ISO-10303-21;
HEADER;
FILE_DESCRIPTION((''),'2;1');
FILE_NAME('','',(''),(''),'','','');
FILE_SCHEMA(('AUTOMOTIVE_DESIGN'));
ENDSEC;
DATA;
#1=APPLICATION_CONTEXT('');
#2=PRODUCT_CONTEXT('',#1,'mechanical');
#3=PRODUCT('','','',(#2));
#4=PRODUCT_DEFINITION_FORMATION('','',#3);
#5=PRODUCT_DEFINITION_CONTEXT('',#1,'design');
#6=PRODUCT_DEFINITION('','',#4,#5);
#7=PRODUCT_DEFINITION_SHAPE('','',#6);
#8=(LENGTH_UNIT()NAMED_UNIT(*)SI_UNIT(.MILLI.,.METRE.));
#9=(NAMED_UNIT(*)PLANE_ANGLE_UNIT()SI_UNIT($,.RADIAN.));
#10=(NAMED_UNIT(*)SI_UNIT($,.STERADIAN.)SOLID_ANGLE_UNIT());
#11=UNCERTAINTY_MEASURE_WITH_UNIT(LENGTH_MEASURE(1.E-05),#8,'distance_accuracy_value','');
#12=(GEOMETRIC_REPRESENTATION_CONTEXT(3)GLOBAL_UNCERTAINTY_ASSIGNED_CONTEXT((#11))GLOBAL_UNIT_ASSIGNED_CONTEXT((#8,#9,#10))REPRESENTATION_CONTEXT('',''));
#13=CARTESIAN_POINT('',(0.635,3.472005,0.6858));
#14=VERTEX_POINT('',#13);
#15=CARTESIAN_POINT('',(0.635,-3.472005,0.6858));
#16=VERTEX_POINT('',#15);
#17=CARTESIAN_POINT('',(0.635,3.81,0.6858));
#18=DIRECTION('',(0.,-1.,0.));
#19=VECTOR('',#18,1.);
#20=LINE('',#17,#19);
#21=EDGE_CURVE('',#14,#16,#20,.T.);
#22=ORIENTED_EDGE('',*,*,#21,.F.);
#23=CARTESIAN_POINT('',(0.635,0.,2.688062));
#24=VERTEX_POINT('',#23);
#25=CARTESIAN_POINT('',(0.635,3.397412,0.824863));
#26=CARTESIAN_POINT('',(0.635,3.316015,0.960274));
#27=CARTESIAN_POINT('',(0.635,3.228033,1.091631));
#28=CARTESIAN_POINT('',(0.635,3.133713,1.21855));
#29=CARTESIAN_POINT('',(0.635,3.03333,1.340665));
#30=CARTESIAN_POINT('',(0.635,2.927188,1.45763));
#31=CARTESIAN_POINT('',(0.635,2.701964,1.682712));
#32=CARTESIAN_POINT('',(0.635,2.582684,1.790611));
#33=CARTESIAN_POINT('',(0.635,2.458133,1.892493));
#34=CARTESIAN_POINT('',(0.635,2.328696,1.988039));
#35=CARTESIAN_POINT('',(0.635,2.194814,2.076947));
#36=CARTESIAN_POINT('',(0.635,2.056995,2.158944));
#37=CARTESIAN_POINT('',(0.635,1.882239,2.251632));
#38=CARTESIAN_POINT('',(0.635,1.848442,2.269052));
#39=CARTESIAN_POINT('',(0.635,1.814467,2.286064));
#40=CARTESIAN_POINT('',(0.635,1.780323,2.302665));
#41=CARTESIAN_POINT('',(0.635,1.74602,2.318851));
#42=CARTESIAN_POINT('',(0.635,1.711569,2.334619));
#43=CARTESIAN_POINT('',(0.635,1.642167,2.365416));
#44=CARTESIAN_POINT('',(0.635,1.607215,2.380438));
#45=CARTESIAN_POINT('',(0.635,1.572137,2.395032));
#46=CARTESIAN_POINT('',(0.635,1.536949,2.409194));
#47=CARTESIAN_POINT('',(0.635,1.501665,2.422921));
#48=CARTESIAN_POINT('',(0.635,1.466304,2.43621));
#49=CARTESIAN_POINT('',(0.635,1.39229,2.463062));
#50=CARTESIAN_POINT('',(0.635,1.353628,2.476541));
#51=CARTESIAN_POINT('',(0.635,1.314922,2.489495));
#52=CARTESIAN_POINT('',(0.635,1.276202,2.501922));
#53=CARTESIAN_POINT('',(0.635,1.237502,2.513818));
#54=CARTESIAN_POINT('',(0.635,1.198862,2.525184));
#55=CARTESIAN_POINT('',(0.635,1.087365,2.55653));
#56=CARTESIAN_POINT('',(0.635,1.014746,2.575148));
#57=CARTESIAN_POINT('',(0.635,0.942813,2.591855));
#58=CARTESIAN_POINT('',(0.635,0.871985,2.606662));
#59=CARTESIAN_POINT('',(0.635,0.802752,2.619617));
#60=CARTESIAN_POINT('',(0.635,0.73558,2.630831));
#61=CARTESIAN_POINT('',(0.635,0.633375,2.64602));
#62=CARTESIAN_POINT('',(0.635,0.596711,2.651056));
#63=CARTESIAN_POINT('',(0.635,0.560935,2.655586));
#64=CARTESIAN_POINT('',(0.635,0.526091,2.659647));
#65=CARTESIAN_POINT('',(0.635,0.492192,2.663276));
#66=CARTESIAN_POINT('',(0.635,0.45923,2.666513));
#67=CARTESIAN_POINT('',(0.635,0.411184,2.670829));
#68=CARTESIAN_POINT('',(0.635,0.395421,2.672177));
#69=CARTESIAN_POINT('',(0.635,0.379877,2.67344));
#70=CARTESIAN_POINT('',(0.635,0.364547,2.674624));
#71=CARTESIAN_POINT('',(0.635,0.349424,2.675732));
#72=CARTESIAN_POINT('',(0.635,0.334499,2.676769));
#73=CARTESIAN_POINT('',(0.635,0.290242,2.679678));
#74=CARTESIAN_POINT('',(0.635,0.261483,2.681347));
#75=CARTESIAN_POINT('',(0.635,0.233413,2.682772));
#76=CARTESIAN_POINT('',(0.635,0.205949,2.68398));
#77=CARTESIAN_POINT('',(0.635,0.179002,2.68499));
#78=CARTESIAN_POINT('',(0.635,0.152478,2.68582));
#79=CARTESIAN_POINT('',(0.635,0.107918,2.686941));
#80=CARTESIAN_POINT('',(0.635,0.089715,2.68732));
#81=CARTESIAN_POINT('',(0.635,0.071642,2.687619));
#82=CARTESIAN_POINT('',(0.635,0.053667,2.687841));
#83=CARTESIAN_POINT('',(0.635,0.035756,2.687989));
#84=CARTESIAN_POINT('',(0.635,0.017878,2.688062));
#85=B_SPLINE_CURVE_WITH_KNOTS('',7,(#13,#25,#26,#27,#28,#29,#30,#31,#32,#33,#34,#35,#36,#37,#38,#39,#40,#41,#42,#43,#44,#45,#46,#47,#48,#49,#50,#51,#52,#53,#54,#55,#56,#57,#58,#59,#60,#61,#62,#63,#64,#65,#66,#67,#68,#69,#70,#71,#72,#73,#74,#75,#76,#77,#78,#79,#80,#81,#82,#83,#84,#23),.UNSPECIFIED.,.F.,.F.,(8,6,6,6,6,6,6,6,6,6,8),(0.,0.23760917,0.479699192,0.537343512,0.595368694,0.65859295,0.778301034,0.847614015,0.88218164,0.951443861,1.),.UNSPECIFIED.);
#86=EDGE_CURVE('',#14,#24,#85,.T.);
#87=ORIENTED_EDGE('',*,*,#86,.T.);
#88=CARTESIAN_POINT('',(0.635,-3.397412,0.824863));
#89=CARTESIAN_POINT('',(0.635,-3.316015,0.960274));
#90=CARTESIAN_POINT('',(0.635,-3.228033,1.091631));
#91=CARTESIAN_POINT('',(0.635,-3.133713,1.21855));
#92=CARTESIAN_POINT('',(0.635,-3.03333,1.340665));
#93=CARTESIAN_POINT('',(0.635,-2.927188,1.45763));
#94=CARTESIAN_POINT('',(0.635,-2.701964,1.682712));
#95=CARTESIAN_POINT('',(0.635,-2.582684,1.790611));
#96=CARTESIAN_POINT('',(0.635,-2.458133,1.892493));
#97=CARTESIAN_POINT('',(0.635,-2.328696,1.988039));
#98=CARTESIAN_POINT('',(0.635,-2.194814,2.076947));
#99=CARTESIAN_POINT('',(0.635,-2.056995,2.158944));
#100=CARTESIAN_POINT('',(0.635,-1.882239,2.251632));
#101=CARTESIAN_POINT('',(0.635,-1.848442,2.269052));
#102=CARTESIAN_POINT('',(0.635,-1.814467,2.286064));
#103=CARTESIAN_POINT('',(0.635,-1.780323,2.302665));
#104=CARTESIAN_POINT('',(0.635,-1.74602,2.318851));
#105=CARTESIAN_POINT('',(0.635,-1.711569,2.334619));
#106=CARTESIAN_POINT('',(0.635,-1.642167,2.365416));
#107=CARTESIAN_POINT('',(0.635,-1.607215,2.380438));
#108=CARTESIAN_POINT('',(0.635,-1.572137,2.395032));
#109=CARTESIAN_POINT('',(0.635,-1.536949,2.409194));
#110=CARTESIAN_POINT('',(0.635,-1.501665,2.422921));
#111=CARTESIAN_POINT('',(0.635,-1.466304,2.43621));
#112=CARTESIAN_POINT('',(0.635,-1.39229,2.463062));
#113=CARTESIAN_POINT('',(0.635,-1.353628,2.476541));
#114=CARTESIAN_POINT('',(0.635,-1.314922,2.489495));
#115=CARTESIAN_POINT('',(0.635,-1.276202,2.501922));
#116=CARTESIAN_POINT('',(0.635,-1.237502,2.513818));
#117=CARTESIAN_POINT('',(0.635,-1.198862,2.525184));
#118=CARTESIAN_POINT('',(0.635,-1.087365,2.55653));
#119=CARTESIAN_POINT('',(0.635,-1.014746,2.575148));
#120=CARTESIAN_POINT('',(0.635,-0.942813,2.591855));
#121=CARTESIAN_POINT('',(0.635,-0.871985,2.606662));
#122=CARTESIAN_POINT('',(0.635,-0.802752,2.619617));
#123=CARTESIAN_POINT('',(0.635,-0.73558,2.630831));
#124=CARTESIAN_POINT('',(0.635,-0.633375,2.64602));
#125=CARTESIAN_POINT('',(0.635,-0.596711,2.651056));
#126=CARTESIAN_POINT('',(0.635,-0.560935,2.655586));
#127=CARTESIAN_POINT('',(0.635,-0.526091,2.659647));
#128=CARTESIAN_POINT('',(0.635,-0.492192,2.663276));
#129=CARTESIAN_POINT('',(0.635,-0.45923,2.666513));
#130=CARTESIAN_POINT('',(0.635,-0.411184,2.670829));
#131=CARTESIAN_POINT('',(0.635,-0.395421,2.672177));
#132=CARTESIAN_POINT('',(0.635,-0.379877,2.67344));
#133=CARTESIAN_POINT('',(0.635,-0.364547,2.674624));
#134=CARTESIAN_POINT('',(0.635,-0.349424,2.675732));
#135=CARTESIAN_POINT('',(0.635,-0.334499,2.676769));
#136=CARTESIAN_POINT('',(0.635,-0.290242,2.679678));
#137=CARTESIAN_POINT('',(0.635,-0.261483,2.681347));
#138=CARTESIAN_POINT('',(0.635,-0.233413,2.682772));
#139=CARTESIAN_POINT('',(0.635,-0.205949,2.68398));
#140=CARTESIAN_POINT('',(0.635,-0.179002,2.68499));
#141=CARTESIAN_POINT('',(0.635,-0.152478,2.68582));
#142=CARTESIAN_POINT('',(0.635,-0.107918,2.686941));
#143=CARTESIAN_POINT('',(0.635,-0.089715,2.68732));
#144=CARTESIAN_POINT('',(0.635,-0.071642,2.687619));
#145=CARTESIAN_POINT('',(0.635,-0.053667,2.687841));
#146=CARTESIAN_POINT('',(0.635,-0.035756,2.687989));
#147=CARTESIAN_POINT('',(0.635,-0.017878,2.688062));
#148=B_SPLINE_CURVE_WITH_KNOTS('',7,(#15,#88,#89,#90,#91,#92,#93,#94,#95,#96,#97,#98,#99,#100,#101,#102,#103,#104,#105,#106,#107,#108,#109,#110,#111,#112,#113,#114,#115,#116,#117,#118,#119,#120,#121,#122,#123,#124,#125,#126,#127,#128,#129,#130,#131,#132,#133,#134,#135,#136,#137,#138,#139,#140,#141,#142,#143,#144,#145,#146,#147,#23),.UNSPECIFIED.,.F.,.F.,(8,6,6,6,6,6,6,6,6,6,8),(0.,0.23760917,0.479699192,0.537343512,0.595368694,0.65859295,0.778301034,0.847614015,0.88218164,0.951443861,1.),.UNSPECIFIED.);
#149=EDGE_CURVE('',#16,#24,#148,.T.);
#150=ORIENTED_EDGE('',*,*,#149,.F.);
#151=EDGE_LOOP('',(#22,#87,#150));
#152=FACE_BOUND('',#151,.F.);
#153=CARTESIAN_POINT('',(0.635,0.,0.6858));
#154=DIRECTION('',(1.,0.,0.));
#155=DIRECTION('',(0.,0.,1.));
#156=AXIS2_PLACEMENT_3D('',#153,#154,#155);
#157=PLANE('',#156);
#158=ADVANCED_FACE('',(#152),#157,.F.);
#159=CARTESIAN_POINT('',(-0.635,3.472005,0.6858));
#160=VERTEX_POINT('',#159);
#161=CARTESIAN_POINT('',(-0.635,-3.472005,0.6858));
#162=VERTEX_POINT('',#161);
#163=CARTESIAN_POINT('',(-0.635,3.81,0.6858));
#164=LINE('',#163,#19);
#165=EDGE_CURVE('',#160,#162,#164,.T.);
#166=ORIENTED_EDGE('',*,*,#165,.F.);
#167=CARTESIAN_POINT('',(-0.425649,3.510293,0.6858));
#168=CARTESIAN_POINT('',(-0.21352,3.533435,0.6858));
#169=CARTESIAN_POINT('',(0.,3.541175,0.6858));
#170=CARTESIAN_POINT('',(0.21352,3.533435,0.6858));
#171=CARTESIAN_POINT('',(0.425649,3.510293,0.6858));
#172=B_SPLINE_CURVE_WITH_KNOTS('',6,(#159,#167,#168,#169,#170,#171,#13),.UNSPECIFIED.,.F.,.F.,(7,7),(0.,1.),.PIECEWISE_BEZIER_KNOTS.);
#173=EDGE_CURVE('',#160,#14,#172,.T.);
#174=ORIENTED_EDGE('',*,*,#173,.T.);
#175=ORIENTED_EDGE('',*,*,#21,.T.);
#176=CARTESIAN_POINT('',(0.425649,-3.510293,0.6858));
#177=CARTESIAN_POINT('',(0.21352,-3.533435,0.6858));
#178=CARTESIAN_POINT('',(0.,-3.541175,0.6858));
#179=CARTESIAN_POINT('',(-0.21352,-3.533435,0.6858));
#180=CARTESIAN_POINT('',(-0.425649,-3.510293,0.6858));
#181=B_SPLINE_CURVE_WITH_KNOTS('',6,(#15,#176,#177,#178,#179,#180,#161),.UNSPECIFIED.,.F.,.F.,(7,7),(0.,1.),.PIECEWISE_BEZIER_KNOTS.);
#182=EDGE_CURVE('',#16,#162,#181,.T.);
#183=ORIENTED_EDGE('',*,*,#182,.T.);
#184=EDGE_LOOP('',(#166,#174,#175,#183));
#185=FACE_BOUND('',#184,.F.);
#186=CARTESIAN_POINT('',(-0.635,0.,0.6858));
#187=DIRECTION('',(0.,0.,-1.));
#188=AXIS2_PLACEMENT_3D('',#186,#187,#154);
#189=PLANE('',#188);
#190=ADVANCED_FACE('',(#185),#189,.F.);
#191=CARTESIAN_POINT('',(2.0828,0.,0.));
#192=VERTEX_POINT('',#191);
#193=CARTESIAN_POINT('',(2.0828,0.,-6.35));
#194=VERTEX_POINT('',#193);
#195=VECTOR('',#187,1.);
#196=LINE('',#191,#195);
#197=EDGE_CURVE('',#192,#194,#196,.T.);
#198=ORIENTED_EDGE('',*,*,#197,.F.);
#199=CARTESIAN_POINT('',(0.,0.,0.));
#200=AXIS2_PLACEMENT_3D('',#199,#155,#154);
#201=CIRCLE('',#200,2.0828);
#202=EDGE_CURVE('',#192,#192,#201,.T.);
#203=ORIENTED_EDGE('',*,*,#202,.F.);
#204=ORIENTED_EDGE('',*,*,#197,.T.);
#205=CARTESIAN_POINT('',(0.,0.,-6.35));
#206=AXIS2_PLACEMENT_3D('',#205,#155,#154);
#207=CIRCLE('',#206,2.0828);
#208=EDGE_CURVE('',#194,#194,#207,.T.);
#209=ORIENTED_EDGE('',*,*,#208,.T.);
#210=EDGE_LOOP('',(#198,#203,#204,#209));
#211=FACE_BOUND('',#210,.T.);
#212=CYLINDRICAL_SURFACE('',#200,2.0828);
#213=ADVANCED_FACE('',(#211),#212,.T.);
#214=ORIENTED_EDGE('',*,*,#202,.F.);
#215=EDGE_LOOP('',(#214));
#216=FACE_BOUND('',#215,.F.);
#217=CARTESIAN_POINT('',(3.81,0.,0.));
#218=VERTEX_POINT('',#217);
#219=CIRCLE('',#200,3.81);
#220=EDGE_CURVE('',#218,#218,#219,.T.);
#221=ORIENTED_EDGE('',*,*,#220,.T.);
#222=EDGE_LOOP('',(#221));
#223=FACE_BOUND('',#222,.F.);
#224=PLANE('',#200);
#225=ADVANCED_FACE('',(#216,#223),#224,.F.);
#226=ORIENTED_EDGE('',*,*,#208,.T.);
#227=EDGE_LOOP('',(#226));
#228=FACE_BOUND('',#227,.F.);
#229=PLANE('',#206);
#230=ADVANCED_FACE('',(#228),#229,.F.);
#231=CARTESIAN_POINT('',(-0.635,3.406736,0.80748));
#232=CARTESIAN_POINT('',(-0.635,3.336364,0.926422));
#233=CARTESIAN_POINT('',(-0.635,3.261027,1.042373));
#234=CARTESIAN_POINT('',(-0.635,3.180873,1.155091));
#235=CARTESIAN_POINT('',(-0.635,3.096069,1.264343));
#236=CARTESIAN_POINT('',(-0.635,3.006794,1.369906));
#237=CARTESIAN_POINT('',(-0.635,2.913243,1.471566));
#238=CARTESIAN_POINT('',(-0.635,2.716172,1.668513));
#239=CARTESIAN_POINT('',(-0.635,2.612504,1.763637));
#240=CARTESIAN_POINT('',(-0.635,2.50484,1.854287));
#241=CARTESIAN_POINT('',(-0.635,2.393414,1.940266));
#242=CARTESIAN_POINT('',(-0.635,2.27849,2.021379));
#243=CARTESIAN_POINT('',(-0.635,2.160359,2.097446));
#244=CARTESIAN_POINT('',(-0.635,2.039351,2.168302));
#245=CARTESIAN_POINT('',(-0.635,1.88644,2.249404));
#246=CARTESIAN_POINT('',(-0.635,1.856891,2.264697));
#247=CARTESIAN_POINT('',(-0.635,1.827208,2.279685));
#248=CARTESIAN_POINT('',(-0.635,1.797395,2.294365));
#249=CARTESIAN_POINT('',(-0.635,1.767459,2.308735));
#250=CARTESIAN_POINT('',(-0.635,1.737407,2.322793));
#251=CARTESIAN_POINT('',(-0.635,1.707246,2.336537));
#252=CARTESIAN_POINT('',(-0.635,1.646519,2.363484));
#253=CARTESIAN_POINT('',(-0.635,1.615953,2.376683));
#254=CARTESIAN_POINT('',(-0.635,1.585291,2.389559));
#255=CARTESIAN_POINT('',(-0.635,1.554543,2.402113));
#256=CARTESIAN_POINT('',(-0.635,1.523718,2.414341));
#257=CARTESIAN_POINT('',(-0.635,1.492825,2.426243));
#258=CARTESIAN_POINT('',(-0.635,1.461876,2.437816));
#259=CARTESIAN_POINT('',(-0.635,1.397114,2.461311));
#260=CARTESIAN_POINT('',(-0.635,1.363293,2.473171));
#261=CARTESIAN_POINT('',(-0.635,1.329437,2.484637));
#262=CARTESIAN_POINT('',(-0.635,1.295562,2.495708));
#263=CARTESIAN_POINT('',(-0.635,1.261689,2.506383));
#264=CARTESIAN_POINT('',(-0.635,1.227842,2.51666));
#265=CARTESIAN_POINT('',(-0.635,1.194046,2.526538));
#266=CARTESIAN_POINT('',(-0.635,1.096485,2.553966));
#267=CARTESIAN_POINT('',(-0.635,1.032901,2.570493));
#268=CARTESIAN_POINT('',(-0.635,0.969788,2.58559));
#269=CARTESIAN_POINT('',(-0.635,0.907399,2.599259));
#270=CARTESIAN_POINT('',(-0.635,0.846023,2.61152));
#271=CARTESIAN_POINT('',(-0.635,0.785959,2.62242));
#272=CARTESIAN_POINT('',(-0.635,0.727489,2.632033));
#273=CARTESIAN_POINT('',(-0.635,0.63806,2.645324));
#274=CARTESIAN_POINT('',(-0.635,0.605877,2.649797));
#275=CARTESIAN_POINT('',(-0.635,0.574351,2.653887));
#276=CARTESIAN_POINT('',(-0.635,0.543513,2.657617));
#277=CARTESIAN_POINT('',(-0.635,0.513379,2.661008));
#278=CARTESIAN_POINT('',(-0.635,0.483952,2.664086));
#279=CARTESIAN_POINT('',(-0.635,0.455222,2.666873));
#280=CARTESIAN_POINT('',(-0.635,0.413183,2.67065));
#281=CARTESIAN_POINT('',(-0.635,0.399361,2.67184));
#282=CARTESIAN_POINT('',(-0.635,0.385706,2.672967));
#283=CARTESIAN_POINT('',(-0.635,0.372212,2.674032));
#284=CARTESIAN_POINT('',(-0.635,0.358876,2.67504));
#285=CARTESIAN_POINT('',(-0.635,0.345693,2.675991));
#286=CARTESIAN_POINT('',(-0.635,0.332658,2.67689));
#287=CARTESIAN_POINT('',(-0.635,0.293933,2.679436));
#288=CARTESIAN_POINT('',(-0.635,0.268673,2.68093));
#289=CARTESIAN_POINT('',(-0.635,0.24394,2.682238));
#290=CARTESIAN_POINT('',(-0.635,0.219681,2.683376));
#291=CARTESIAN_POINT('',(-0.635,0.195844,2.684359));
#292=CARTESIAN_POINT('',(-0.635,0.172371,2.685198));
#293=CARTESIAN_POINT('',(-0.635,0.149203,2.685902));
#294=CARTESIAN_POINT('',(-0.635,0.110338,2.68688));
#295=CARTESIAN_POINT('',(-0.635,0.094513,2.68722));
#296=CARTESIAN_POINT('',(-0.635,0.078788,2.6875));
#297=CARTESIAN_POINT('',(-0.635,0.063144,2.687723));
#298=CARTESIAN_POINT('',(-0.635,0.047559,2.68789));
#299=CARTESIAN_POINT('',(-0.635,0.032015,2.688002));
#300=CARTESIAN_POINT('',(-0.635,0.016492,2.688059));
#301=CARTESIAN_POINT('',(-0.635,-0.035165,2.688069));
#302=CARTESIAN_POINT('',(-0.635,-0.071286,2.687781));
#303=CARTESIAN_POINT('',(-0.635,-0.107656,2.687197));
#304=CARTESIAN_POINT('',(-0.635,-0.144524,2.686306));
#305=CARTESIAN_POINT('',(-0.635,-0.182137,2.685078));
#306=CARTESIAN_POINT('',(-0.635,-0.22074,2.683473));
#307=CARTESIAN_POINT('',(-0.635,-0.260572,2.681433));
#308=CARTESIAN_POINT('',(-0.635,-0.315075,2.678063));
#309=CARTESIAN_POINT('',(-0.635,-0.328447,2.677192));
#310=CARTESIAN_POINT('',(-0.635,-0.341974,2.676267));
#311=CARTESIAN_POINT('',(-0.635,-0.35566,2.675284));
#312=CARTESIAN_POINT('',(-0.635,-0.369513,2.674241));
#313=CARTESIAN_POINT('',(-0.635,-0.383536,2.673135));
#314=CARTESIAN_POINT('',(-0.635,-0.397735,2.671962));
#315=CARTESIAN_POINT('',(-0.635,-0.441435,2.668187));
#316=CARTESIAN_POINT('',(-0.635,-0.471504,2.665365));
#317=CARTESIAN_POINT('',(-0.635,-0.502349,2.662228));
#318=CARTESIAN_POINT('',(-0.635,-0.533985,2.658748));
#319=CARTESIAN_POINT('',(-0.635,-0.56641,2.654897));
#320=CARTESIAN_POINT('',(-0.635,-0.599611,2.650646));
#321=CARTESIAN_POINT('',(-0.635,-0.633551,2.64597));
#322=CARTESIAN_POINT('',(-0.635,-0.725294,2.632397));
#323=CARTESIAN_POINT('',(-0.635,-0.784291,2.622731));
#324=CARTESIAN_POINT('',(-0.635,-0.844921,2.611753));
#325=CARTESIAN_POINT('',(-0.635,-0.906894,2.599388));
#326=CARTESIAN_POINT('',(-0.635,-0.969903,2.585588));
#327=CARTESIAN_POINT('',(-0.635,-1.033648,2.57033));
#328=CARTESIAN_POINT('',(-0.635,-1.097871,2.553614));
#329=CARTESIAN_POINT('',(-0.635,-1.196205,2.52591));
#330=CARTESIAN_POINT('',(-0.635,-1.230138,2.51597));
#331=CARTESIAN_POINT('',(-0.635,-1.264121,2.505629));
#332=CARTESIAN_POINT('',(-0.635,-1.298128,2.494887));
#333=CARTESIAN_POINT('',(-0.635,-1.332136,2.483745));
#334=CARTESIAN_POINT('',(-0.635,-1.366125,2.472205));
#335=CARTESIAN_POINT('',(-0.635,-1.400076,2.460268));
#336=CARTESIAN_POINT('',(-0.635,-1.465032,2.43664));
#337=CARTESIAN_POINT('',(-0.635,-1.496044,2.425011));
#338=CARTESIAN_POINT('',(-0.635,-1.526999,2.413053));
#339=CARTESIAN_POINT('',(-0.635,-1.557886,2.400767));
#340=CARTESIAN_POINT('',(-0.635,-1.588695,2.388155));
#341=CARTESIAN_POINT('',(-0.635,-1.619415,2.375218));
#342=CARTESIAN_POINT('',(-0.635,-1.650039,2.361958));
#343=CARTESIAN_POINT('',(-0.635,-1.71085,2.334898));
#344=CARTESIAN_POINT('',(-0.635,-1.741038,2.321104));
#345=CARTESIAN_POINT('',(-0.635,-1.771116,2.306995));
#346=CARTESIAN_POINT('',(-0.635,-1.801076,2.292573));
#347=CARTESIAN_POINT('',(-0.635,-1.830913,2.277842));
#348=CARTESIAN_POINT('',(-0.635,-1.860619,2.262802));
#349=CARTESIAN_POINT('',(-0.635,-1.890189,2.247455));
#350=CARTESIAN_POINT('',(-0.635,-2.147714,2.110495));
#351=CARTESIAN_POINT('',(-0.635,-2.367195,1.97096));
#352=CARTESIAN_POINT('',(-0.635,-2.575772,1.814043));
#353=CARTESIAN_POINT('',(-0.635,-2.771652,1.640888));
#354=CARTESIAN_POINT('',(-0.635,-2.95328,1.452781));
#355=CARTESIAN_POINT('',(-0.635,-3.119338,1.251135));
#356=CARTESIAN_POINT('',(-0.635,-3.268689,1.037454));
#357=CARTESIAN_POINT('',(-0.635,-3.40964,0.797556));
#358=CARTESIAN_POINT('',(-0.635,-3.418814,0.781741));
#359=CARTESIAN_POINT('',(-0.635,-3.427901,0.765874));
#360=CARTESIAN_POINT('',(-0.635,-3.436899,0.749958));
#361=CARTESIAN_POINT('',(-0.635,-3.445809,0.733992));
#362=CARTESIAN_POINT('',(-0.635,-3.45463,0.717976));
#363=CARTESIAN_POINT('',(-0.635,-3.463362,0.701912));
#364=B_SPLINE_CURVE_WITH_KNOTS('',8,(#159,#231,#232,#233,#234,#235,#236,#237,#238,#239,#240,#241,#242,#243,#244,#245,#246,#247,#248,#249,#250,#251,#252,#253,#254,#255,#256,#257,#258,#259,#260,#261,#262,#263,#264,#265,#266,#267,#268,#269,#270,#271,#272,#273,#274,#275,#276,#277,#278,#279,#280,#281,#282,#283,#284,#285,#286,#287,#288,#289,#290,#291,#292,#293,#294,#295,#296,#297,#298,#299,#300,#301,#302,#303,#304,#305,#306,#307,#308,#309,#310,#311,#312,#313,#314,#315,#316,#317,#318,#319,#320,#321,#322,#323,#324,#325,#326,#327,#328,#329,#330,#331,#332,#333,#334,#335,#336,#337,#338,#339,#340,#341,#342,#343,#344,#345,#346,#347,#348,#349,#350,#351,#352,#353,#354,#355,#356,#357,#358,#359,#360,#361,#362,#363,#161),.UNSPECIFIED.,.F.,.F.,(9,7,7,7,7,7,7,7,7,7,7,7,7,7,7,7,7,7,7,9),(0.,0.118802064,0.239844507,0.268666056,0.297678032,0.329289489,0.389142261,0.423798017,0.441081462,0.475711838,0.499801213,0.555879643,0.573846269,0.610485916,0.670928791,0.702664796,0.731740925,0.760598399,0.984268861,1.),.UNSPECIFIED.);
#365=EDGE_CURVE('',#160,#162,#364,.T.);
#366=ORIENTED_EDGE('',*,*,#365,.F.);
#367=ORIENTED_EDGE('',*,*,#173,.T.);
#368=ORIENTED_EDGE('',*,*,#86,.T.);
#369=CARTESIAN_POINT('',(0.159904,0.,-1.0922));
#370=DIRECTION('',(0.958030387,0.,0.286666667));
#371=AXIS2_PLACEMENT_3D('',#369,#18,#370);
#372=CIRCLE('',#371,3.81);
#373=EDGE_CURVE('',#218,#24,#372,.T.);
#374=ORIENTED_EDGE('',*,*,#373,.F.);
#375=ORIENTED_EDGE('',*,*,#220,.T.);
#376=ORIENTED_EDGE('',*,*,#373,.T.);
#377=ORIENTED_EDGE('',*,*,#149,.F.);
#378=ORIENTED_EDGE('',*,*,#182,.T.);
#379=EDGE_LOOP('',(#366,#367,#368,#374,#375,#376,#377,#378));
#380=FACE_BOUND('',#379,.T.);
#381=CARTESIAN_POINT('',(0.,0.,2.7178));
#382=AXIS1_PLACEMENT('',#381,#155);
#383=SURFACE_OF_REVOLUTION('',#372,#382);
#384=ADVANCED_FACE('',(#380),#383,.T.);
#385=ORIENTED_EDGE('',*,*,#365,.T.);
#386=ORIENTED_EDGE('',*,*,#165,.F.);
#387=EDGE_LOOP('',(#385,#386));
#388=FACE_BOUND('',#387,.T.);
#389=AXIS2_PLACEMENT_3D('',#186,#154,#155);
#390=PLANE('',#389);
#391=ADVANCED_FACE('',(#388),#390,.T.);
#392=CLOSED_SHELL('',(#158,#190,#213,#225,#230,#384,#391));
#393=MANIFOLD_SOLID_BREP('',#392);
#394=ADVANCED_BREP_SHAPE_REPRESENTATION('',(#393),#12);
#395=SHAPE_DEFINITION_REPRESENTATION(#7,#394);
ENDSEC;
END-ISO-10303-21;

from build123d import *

# Parameters (mm, degrees)
F0_R     = 2.0828
F1_DEPTH = 6.35
F0_R_2   = 3.81
F2_DEPTH = 2.7178
F4_W     = 1.27
F4_H     = 4.064
F5_DEPTH = 3.81


# Not quite as in the source:
# - a fillet or chamfer that OpenCascade refuses, or shapes differently, is made with other operations: its cross-section is extruded or revolved along the edge and cut away or added


with BuildPart() as f1:
    # F0 (on Top) → F1 (new body)
    with BuildSketch(Plane.XY):
        Circle(F0_R)
    extrude(amount=-F1_DEPTH)

    # F0 (on Top) → F2 (join)
    with BuildSketch(Plane.XY):
        Circle(F0_R_2)
        Circle(F0_R, mode=Mode.SUBTRACT)
        Circle(F0_R)
    extrude(amount=F2_DEPTH)

    # F3: fillet of radius 3.81 on 1 edges, made by hand

    # F3_s1 → F3_t2 (revolve, cut)
    with BuildSketch(Plane.XZ):
        with BuildLine():
            ThreePointArc((3.81, 0), (2.43529628, 1.9637271915), (0.1599042259, 2.7178))
            Line((0.1599042259, 2.7178), (3.81, 2.7178))
            Line((3.81, 2.7178), (3.81, 0))
        make_face()
    revolve(axis=Axis((0, 0, 2.7178), (0, 0, 1)), mode=Mode.SUBTRACT)

    # F4 (on Front) → F5 (cut, symmetric)
    with BuildSketch(Plane.XZ):
        with Locations((0, 2.7178)):
            Rectangle(F4_W, F4_H)
    extrude(amount=F5_DEPTH, both=True, mode=Mode.SUBTRACT)


solid = f1.part
